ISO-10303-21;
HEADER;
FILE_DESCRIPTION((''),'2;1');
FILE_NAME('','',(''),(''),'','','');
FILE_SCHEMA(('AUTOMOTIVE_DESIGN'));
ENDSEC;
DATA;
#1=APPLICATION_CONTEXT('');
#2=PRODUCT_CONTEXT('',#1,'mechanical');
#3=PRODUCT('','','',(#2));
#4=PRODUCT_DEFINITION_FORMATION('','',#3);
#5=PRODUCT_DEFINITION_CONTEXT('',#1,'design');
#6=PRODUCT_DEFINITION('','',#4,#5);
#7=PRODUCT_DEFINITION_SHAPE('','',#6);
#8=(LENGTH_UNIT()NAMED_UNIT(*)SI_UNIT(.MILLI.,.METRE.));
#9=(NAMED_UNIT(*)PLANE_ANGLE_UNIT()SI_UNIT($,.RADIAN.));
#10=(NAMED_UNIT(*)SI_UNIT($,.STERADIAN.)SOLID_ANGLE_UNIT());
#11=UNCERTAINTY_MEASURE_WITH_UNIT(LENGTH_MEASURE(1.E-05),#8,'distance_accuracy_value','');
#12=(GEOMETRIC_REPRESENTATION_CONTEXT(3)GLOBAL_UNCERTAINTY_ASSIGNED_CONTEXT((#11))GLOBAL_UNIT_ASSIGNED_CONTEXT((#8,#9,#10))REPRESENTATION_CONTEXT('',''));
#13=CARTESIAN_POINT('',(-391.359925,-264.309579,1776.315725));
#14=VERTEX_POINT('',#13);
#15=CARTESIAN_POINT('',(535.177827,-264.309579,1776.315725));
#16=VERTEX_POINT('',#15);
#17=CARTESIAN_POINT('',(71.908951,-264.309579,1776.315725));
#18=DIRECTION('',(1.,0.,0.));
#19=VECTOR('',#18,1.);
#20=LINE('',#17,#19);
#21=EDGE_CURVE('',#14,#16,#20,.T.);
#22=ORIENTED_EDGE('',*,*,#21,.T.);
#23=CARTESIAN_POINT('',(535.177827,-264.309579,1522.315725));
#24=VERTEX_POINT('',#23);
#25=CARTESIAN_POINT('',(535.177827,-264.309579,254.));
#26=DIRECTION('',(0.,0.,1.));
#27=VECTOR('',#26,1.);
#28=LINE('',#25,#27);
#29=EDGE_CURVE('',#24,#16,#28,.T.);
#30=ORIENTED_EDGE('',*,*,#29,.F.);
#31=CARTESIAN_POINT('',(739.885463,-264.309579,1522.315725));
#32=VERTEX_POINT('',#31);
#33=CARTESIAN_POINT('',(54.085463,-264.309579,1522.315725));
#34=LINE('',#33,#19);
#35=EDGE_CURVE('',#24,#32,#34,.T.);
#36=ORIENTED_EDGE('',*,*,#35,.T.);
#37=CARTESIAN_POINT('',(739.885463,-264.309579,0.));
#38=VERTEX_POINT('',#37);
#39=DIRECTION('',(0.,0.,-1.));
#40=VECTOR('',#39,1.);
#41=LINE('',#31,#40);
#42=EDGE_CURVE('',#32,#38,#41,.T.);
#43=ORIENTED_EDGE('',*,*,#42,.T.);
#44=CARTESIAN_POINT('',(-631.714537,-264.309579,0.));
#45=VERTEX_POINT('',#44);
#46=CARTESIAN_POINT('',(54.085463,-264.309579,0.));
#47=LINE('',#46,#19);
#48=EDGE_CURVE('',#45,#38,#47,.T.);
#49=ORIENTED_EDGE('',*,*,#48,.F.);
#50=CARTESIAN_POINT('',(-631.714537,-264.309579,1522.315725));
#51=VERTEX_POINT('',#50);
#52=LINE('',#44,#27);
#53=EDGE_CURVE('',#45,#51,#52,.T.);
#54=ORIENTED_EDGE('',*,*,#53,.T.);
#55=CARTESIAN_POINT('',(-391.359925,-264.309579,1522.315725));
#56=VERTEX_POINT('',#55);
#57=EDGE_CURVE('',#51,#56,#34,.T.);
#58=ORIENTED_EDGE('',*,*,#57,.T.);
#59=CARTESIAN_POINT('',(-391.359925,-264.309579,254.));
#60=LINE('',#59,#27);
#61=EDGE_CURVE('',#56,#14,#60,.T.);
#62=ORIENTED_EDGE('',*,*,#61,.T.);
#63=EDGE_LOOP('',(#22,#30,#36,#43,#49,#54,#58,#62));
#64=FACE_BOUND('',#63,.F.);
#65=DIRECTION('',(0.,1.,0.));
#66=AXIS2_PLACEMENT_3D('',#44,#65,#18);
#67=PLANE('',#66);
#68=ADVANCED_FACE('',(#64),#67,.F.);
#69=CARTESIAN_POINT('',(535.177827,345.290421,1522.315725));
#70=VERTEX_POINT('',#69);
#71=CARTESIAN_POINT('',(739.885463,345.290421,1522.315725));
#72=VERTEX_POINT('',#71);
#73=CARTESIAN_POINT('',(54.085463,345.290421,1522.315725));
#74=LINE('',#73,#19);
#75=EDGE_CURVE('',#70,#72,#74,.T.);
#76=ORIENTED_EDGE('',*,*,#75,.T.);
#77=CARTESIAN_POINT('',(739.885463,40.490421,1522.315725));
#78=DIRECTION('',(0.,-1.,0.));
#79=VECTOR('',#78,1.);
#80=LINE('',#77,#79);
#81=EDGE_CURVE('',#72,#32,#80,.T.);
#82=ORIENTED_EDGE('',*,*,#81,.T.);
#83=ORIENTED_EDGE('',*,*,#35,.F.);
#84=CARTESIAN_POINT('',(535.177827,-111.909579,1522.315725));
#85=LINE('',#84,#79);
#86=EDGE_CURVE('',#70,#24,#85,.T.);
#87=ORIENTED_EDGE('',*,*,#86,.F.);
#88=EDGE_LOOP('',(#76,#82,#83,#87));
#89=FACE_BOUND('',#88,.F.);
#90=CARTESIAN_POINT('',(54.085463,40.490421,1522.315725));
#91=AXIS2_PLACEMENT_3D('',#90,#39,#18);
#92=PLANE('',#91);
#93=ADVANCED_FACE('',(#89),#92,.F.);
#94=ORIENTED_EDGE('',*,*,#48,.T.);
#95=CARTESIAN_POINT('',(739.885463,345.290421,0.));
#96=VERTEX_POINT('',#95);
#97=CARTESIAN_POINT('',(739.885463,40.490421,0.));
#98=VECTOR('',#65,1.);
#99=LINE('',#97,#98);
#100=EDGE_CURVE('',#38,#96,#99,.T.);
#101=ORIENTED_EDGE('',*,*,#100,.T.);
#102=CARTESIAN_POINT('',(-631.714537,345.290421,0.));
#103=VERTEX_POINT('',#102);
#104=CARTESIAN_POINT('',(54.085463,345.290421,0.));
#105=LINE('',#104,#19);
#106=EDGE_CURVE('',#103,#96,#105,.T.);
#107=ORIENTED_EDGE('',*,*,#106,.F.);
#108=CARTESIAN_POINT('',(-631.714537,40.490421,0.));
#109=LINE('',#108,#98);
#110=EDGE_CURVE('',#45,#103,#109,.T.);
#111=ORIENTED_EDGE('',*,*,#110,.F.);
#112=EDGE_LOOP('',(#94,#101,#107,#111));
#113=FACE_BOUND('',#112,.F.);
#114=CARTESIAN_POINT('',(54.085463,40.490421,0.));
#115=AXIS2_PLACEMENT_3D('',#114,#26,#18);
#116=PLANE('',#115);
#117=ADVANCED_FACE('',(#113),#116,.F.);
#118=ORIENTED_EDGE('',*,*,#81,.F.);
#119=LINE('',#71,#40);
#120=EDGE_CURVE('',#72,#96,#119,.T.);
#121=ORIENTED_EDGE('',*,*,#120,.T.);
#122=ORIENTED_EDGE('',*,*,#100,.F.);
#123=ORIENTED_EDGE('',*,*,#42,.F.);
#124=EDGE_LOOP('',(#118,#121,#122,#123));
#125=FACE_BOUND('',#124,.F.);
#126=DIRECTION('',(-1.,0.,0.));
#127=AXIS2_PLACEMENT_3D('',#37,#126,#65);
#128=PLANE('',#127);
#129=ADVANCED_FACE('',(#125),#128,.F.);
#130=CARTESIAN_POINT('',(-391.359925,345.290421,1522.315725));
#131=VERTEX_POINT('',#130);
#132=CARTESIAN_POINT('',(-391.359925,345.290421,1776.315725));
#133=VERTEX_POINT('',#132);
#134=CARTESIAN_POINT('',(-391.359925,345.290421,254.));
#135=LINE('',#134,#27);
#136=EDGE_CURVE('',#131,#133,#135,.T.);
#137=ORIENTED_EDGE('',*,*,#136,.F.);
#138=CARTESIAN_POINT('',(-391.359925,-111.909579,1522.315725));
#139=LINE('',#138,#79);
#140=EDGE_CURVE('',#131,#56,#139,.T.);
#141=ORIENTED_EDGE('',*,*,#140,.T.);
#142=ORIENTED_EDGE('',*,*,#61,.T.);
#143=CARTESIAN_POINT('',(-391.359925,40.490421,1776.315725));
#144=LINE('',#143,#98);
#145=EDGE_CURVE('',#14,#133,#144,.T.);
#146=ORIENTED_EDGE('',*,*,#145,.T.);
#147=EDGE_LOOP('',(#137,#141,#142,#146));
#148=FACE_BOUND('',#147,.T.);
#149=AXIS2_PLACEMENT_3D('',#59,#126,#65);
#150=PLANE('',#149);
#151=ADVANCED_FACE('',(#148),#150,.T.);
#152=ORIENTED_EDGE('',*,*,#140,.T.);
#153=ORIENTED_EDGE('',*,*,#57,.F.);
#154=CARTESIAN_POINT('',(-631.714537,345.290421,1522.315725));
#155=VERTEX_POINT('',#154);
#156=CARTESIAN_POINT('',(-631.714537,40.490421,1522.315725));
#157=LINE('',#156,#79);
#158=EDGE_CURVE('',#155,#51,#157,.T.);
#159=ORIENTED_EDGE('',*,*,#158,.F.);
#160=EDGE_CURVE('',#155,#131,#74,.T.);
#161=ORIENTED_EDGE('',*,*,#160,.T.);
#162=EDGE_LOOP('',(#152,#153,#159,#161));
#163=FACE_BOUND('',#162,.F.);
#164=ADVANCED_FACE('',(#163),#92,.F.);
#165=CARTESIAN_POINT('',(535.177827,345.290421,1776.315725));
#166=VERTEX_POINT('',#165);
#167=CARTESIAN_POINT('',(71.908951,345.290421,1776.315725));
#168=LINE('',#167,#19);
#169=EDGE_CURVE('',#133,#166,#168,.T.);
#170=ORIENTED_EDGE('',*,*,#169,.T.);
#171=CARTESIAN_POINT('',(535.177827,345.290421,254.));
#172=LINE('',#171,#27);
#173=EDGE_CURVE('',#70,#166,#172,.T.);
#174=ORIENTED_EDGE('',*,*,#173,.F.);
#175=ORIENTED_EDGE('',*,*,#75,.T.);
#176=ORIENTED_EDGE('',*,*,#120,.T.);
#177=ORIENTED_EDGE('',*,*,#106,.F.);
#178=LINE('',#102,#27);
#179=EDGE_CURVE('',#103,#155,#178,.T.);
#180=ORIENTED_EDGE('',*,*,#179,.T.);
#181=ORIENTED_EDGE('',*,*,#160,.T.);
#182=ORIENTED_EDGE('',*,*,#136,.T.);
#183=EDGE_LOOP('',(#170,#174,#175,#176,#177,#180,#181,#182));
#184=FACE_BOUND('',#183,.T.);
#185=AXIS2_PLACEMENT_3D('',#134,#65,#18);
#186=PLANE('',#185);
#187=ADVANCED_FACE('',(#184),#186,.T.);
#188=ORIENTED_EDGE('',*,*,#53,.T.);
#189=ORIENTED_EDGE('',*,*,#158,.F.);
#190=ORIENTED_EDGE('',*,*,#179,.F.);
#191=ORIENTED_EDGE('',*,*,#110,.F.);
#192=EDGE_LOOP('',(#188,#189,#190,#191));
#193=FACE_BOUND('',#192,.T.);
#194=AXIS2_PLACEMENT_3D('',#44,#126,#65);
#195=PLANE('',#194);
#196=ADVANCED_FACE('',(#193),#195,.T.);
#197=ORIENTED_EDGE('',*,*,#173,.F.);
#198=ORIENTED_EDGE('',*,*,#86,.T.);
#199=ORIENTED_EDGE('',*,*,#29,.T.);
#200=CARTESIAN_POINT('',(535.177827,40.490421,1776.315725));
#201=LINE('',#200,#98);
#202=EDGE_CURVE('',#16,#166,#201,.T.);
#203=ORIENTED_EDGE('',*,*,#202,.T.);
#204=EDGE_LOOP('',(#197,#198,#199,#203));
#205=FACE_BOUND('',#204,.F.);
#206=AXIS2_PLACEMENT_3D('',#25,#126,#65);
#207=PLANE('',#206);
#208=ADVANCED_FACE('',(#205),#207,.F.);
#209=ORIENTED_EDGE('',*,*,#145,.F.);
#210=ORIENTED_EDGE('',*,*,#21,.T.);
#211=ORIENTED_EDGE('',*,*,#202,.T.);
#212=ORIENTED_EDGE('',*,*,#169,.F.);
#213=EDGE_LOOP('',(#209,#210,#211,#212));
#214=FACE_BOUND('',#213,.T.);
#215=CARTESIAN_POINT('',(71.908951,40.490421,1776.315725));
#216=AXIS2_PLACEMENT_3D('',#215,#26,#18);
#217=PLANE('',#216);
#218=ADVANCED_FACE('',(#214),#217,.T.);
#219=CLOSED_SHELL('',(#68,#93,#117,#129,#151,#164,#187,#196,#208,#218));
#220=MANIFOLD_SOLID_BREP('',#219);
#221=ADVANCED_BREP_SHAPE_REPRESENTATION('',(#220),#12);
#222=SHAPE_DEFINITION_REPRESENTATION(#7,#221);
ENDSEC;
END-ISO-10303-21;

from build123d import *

# Parameters (mm, degrees)
F0_W       = 1371.6
F0_H       = 609.6
F1_DEPTH   = 254
F2_W       = 926.5377521515
F2_H       = 609.6
F1_FACE1_W = 1371.6
F1_FACE1_H = 609.6
F3_DEPTH   = 1522.3157249


# Not quite as in the source:
# - an extrude ends at something that could not be found from the text; its depth is read off the source's solid


with BuildPart() as f1:
    # F0 (on Top) → F1 (new body)
    with BuildSketch(Plane.XY):
        with Locations((54.0854626386, 40.4904214665)):
            Rectangle(F0_W, F0_H)
    extrude(amount=F1_DEPTH)

    # F2 (on face) + F1_face1 (on face) → F3 (join, through all)
    with BuildSketch(Plane.XY.offset(254)):
        with Locations((71.9089508057, 40.4904214665)):
            Rectangle(F2_W, F2_H)
    with BuildSketch(Plane(origin=(54.0854626386, 40.4904214665, 0), x_dir=(1, 0, 0), z_dir=(0, 0, -1))):
        Rectangle(F1_FACE1_W, F1_FACE1_H)
    extrude(amount=F3_DEPTH, dir=(0, 0, 1))


solid = f1.part
